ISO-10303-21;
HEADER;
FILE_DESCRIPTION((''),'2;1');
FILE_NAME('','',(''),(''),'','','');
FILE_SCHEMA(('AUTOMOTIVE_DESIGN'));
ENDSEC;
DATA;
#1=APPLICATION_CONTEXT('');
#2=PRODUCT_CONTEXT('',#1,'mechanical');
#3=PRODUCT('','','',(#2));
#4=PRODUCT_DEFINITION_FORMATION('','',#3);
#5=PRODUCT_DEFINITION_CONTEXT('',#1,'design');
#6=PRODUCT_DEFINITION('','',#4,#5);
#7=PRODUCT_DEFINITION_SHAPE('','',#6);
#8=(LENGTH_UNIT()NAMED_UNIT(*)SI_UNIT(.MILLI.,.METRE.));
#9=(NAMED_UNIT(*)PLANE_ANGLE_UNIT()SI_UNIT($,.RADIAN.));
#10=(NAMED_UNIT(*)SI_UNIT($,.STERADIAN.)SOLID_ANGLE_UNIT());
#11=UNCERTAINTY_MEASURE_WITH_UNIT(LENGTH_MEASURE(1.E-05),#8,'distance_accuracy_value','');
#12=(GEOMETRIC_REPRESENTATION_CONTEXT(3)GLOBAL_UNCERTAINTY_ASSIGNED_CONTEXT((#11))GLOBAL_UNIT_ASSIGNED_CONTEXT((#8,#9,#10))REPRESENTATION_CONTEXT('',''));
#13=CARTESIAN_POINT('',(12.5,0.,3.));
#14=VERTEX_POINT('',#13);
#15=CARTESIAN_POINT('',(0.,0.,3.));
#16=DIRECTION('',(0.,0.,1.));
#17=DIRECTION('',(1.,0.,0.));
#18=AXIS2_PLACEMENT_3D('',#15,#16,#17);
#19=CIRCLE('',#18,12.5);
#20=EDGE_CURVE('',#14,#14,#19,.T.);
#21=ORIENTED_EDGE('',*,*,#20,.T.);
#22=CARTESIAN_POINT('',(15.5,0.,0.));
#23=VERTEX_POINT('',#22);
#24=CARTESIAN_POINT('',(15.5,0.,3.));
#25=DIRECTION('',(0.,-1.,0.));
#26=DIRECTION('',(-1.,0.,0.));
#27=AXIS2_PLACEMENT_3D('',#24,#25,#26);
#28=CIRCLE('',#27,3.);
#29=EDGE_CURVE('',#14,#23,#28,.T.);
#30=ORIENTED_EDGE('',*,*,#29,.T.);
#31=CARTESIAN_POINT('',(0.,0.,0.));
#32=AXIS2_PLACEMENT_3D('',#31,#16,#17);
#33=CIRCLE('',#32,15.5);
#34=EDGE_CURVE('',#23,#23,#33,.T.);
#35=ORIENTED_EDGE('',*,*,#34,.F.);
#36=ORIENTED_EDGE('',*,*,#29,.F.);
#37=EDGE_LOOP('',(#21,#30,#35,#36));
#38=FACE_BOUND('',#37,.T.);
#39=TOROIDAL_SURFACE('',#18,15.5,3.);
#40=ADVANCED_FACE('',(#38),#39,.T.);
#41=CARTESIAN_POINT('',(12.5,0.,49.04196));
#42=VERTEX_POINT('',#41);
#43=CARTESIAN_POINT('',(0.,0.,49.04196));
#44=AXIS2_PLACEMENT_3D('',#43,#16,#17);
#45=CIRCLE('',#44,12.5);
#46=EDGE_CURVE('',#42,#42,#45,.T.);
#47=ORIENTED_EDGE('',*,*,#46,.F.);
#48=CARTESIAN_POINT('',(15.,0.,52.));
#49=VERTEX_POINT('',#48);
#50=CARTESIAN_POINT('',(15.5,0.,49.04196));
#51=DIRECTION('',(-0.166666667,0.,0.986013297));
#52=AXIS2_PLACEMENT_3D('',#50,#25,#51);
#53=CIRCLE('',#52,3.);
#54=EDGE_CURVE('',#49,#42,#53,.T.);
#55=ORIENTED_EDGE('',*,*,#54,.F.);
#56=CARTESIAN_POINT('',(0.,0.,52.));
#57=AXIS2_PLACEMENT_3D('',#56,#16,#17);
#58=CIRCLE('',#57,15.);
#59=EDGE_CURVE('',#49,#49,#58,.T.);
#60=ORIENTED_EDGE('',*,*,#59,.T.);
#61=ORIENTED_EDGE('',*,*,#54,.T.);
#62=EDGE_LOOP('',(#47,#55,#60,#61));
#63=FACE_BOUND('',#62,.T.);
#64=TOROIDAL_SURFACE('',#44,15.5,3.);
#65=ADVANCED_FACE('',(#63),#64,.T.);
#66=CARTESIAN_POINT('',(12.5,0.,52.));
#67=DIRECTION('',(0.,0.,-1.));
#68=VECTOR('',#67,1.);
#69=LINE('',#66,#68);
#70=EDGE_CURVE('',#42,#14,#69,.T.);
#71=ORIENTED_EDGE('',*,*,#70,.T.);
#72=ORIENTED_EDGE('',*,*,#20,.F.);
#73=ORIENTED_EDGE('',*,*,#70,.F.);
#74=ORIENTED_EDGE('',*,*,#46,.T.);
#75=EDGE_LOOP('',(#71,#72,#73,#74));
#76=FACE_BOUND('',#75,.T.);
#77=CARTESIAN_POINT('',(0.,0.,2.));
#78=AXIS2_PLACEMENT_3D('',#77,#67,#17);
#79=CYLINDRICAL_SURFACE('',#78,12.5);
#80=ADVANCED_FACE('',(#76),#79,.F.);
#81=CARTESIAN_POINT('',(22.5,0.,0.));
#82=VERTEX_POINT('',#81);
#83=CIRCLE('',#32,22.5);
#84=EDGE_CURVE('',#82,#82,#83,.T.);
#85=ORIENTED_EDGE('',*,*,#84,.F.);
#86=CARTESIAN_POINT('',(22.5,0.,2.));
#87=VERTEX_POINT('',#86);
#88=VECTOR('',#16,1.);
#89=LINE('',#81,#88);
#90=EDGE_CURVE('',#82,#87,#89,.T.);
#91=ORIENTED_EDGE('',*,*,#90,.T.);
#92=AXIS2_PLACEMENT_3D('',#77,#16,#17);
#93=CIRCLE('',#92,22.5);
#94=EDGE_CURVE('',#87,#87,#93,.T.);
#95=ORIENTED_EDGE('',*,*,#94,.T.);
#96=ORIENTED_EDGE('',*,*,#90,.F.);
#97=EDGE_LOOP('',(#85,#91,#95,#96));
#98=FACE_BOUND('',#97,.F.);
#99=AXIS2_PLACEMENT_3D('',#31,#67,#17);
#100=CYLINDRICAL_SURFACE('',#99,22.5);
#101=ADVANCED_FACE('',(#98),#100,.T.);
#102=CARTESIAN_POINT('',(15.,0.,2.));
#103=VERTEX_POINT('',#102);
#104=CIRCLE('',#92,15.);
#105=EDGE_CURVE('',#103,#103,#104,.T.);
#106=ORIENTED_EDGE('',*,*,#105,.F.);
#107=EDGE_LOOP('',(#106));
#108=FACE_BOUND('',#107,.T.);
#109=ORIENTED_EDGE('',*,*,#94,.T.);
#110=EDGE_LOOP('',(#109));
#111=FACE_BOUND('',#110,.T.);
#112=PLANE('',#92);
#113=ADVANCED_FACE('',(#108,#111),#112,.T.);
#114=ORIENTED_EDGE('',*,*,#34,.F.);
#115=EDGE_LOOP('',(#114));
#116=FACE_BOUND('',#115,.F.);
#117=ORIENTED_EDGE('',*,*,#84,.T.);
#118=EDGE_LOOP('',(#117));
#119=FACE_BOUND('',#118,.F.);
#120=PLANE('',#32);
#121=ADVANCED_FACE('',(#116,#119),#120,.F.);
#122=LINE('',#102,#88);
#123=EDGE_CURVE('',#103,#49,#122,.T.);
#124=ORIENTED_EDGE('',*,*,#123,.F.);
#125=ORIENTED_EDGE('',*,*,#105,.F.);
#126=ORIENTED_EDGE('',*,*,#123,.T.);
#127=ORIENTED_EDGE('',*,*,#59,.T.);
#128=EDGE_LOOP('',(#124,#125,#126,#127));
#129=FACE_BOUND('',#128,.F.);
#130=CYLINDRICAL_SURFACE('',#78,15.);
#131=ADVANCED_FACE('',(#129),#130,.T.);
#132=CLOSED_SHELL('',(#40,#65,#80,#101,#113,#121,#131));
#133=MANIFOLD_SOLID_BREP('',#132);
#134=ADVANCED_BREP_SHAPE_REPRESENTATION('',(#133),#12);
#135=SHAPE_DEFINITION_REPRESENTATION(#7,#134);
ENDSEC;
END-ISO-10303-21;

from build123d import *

# Parameters (mm, degrees)
F0_R     = 22.5
F0_R_2   = 12.5
F1_DEPTH = 2
F2_R     = 15
F2_R_2   = 12.5
F3_DEPTH = 50


# Not quite as in the source:
# - a fillet or chamfer that OpenCascade refuses, or shapes differently, is made with other operations: its cross-section is extruded or revolved along the edge and cut away or added


with BuildPart() as f1:
    # F0 (on Top) → F1 (new body)
    with BuildSketch(Plane.XY):
        Circle(F0_R)
        Circle(F0_R_2, mode=Mode.SUBTRACT)
    extrude(amount=F1_DEPTH)

    # F2 (on face) → F3 (join)
    with BuildSketch(Plane.XY.offset(2)):
        Circle(F2_R)
        Circle(F2_R_2, mode=Mode.SUBTRACT)
    extrude(amount=F3_DEPTH)

    # F4: fillet of radius 3 on 2 edges, made by hand

    # F4_s1 → F4_t2 (revolve, cut)
    with BuildSketch(Plane.XZ):
        with BuildLine():
            ThreePointArc((12.5, 3), (13.3786796564, 0.8786796564), (15.5, 0))
            Line((15.5, 0), (12.5, 0))
            Line((12.5, 0), (12.5, 3))
        make_face()
    revolve(axis=Axis((0, 0, 0), (0, 0, 1)), mode=Mode.SUBTRACT)

    # F4_s3 → F4_t4 (revolve, cut)
    with BuildSketch(Plane.XZ):
        with BuildLine():
            ThreePointArc((15, 52), (13.2087121525, 50.9784517816), (12.5, 49.0419601084))
            Line((12.5, 49.0419601084), (12.5, 52))
            Line((12.5, 52), (15, 52))
        make_face()
    revolve(axis=Axis((0, 0, 52), (0, 0, 1)), mode=Mode.SUBTRACT)


solid = f1.part
